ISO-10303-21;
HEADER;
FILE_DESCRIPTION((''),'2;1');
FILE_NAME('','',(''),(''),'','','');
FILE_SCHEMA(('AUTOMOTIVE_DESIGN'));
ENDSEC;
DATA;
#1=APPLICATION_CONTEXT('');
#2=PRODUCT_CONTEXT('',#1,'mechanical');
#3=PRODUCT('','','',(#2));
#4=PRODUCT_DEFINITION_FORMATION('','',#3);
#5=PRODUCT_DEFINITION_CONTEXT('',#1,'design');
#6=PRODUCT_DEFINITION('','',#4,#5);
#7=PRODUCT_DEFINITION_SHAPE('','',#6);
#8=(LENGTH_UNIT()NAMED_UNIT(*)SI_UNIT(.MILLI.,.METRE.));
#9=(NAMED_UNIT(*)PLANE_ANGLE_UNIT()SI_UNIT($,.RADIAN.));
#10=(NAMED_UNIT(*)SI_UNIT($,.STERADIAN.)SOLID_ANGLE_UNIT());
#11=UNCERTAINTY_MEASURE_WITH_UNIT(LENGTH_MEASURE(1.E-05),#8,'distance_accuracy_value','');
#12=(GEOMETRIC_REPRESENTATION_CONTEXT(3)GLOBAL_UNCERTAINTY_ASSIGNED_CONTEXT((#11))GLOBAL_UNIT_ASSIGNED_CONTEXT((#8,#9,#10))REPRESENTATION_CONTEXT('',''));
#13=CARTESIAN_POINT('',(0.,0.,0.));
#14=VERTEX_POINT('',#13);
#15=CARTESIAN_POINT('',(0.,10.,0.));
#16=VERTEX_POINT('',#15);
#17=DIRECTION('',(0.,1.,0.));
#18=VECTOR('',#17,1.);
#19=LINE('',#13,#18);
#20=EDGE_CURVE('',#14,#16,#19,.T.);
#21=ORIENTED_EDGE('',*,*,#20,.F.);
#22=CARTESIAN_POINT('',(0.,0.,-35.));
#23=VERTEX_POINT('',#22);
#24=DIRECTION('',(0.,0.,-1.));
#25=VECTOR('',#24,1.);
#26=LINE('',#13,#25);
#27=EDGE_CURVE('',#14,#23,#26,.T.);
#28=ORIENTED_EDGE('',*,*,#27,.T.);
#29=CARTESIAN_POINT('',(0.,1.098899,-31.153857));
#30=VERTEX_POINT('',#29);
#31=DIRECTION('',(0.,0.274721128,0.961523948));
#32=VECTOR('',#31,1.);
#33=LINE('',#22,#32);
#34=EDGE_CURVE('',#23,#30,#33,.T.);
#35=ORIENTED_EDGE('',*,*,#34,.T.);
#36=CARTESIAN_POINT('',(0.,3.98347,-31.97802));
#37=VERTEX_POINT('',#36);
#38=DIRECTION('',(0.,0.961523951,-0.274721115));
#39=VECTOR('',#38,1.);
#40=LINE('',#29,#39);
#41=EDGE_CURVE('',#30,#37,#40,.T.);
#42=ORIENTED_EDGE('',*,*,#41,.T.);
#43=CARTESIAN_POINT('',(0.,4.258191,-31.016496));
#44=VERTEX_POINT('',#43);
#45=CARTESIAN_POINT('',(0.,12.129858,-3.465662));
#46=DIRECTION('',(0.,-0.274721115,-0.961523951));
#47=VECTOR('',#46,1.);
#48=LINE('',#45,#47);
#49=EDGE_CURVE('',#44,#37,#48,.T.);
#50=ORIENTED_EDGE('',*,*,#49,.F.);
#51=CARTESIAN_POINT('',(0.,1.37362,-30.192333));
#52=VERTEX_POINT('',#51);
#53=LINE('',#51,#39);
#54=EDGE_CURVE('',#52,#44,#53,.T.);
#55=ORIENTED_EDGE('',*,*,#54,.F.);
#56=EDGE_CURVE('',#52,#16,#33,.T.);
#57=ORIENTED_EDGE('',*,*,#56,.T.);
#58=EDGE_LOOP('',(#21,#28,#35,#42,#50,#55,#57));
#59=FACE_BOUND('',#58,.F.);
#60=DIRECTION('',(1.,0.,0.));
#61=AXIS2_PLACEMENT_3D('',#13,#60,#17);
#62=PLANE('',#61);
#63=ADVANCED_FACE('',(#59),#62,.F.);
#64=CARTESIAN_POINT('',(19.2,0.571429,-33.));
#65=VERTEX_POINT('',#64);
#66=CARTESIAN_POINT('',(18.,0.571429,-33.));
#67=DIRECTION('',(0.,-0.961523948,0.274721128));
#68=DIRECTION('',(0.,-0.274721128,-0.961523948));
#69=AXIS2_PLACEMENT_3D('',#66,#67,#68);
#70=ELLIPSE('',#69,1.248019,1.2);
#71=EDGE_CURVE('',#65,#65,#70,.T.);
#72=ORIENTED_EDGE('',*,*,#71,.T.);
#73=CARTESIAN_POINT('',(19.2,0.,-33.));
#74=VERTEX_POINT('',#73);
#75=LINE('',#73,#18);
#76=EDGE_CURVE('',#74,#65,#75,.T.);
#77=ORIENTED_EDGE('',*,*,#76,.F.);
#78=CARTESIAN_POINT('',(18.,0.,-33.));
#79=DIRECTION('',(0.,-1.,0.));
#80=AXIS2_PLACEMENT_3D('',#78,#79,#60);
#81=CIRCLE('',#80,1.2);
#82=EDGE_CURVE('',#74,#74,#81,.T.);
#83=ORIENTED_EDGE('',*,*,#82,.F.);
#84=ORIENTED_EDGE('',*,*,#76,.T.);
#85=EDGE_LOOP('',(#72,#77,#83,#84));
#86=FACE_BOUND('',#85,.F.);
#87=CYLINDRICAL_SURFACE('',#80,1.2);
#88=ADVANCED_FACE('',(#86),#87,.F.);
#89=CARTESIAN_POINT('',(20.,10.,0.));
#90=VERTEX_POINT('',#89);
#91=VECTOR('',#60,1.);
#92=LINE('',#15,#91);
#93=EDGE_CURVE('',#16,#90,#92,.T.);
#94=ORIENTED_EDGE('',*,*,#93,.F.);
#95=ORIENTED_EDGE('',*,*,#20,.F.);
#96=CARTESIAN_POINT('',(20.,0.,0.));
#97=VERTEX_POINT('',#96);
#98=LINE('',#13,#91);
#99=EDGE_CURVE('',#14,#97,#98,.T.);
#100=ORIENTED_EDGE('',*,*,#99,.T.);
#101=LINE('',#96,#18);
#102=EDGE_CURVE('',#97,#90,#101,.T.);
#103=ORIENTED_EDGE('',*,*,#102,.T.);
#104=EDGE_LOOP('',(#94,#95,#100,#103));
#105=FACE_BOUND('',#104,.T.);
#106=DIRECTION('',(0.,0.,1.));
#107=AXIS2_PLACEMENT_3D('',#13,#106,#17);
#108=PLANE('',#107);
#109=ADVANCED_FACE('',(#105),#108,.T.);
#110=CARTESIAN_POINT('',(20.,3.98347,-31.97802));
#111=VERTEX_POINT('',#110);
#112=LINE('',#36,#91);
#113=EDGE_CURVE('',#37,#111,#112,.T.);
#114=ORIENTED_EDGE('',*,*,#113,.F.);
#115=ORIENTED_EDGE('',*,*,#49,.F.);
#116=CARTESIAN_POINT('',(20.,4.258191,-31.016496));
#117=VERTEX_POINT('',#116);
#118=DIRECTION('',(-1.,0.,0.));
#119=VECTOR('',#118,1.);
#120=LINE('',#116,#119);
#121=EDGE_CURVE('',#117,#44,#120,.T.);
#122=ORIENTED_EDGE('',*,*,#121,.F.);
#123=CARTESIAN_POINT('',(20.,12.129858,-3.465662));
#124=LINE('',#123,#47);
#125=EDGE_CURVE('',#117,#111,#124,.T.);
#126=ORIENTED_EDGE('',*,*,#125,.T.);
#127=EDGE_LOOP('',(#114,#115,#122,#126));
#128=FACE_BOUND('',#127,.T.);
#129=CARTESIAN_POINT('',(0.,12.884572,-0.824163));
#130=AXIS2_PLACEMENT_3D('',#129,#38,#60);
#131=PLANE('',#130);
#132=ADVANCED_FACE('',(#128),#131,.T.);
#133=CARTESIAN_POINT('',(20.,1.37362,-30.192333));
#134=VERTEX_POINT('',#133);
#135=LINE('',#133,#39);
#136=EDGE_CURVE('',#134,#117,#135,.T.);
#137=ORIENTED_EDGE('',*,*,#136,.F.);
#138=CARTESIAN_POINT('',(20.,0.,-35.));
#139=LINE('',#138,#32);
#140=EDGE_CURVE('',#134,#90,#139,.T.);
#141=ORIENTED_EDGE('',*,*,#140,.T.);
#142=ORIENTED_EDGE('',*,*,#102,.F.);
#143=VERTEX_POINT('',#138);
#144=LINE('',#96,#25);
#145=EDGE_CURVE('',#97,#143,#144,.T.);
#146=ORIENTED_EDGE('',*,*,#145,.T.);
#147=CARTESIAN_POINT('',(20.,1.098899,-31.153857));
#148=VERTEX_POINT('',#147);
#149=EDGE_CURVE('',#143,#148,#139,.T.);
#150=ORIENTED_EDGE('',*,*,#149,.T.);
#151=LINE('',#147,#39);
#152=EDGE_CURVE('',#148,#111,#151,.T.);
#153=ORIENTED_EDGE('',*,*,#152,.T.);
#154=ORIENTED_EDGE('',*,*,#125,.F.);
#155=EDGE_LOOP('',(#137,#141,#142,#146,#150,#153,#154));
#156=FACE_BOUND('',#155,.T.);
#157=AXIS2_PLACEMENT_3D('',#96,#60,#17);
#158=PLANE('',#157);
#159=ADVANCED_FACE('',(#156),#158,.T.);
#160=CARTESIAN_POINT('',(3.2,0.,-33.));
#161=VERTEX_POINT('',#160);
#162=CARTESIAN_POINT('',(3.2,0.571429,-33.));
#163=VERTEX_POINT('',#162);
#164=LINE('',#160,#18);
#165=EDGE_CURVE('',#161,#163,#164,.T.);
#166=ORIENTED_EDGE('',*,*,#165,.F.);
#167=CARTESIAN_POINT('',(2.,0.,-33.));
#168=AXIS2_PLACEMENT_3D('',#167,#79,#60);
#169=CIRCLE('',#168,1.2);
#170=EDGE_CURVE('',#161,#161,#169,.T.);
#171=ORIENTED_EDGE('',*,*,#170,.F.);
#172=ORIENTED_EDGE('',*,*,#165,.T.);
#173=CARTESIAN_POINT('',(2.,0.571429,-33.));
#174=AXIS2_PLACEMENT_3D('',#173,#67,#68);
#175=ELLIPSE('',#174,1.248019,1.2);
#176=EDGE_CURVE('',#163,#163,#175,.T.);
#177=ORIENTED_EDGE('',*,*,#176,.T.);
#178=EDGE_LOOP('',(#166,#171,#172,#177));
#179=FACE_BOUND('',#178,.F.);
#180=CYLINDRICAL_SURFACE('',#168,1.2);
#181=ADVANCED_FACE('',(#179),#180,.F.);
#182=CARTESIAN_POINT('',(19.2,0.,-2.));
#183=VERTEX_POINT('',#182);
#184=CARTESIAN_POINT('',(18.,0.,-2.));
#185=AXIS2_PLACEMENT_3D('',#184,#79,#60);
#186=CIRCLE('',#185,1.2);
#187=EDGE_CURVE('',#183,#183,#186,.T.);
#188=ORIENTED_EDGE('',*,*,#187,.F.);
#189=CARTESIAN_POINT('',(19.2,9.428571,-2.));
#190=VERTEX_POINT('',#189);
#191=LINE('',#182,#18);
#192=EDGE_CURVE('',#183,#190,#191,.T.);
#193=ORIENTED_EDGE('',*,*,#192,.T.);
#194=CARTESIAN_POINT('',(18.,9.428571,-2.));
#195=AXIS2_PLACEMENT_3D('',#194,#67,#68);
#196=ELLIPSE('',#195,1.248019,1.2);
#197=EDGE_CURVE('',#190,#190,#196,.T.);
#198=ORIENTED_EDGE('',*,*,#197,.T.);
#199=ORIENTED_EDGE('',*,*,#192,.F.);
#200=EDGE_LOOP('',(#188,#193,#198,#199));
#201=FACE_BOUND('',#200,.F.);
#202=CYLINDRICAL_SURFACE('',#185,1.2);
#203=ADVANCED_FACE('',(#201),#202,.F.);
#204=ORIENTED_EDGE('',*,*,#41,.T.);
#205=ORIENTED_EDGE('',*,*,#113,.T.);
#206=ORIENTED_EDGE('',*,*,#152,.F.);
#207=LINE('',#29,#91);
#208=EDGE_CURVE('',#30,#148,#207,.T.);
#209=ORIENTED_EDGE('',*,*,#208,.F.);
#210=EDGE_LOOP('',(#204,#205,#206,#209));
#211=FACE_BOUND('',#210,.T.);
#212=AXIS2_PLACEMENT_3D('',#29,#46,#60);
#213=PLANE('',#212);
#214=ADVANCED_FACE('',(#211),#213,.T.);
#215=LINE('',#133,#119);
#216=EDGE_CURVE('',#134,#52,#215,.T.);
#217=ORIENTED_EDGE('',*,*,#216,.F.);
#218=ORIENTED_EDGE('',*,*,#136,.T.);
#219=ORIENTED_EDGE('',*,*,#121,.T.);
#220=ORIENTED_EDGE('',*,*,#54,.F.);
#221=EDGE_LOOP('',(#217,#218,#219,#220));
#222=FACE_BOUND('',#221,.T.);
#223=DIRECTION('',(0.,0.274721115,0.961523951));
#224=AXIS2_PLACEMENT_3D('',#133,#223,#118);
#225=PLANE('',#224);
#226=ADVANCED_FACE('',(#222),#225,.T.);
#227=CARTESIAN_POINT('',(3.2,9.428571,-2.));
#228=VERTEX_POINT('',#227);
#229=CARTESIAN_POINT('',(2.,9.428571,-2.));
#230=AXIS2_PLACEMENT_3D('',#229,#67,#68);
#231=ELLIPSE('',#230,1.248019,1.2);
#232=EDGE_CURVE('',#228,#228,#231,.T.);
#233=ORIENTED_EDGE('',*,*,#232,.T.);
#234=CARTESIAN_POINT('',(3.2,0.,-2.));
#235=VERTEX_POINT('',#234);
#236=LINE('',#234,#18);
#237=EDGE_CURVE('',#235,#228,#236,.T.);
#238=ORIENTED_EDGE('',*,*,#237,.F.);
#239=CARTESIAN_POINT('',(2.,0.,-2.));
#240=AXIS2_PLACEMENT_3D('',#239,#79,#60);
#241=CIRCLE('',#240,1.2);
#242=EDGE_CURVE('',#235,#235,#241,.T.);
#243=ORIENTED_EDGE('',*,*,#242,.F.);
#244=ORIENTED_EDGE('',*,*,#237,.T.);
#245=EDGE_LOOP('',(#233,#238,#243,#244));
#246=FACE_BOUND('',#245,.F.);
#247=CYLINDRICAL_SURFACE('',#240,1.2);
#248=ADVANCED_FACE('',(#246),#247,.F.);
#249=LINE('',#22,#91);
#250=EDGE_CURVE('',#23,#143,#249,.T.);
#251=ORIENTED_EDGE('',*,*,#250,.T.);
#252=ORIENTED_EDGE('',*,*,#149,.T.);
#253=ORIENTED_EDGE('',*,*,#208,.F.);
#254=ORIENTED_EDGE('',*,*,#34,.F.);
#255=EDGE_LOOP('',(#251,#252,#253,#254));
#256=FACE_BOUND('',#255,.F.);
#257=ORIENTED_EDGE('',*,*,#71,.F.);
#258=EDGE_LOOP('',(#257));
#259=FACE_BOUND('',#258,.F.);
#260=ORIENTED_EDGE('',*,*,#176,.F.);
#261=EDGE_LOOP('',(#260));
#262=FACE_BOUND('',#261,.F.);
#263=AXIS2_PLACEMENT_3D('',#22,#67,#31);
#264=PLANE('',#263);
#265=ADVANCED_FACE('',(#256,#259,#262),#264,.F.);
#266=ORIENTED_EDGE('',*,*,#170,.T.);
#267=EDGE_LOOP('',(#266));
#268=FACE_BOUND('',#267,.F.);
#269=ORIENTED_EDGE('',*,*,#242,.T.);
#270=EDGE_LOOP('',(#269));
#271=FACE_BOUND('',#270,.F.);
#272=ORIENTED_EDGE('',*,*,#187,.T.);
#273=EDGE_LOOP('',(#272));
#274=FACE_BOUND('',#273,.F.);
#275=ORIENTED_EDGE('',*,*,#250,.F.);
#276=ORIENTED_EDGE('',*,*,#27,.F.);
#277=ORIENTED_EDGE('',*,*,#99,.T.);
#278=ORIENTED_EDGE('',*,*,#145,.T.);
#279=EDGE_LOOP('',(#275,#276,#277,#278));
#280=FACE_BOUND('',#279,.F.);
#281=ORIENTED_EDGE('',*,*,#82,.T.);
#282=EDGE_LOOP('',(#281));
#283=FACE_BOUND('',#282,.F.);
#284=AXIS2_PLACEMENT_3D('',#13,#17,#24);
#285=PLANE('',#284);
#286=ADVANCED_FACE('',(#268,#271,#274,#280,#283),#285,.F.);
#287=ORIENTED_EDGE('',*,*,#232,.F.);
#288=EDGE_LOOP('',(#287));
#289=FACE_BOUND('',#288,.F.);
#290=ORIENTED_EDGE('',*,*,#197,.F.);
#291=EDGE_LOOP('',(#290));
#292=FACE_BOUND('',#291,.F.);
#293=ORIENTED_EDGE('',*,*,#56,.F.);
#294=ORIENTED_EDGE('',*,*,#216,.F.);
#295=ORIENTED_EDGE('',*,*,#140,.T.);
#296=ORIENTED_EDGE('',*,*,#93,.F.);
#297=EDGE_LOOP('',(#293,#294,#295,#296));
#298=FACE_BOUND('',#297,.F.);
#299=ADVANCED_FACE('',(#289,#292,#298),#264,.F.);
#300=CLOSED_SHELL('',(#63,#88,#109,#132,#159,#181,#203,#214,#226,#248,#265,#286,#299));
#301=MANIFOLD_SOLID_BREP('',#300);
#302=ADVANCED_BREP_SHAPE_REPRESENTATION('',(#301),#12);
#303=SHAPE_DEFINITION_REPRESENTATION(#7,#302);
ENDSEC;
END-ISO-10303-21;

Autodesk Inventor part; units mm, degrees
ref_plane "YZ Plane" through (0, 0, 0) normal (1, 0, 0) x (0, 1, 0)
ref_plane "XZ Plane" through (0, 0, 0) normal (0, 1, 0) x (-1, 0, 0)
ref_plane "XY Plane" through (0, 0, 0) normal (0, 0, 1) x (1, 0, 0)
sketch "Sketch1" plane through (0, 0, 0) normal (1, 0, 0) x (0, 1, 0)
  line L0 (0, 0) -> (10, 0)
  line L1 (0, 0) -> (0, -35)
  line L2 (0, -35) -> (10, 0)
  dimension "d0" = 10
  dimension "d1" = 35
extrude "Extrusion1" add sketch "Sketch1" along normal blind 20
sketch "Sketch2" plane through (0, 0, -35) normal (0, -1, 0) x (1, 0, 0)
  line L0 (0, 35) -> (20, 35) projected
  circle A0 centre (18, 33) radius 1.2
  line L1 (0, 35) -> (0, 0) projected
  circle A1 centre (2, 33) radius 1.2
  line L2 (20, 35) -> (20, 0) projected
  circle A2 centre (18, 2) radius 1.2
  circle A3 centre (2, 2) radius 1.2
  dimension "d6" = 2.4
  dimension "d8" = 2.4
  dimension "d12" = 2.4
  dimension "d13" = 2.4
extrude "Extrusion2" cut sketch "Sketch2" against normal through all
sketch "Sketch3" plane through (0, 10, 0) normal (0, 0.9615239, -0.2747211) x (1, 0, 0)
  line L0 (0, 2.7472) -> (0, 36.4005) projected
  line L1 (0, 36.4005) -> (0, 32.4005)
  line L2 (20, 2.7472) -> (20, 36.4005) projected
  line L3 (0, 32.4005) -> (20, 32.4005)
  line L4 (20, 32.4005) -> (20, 31.4005)
  line L5 (20, 31.4005) -> (0, 31.4005)
  line L6 (0, 31.4005) -> (0, 32.4005)
  dimension "d16" = 4
  dimension "d17" = 1
extrude "Extrusion3" add sketch "Sketch3" along normal blind 3
properties part number "1_mm_slant"
